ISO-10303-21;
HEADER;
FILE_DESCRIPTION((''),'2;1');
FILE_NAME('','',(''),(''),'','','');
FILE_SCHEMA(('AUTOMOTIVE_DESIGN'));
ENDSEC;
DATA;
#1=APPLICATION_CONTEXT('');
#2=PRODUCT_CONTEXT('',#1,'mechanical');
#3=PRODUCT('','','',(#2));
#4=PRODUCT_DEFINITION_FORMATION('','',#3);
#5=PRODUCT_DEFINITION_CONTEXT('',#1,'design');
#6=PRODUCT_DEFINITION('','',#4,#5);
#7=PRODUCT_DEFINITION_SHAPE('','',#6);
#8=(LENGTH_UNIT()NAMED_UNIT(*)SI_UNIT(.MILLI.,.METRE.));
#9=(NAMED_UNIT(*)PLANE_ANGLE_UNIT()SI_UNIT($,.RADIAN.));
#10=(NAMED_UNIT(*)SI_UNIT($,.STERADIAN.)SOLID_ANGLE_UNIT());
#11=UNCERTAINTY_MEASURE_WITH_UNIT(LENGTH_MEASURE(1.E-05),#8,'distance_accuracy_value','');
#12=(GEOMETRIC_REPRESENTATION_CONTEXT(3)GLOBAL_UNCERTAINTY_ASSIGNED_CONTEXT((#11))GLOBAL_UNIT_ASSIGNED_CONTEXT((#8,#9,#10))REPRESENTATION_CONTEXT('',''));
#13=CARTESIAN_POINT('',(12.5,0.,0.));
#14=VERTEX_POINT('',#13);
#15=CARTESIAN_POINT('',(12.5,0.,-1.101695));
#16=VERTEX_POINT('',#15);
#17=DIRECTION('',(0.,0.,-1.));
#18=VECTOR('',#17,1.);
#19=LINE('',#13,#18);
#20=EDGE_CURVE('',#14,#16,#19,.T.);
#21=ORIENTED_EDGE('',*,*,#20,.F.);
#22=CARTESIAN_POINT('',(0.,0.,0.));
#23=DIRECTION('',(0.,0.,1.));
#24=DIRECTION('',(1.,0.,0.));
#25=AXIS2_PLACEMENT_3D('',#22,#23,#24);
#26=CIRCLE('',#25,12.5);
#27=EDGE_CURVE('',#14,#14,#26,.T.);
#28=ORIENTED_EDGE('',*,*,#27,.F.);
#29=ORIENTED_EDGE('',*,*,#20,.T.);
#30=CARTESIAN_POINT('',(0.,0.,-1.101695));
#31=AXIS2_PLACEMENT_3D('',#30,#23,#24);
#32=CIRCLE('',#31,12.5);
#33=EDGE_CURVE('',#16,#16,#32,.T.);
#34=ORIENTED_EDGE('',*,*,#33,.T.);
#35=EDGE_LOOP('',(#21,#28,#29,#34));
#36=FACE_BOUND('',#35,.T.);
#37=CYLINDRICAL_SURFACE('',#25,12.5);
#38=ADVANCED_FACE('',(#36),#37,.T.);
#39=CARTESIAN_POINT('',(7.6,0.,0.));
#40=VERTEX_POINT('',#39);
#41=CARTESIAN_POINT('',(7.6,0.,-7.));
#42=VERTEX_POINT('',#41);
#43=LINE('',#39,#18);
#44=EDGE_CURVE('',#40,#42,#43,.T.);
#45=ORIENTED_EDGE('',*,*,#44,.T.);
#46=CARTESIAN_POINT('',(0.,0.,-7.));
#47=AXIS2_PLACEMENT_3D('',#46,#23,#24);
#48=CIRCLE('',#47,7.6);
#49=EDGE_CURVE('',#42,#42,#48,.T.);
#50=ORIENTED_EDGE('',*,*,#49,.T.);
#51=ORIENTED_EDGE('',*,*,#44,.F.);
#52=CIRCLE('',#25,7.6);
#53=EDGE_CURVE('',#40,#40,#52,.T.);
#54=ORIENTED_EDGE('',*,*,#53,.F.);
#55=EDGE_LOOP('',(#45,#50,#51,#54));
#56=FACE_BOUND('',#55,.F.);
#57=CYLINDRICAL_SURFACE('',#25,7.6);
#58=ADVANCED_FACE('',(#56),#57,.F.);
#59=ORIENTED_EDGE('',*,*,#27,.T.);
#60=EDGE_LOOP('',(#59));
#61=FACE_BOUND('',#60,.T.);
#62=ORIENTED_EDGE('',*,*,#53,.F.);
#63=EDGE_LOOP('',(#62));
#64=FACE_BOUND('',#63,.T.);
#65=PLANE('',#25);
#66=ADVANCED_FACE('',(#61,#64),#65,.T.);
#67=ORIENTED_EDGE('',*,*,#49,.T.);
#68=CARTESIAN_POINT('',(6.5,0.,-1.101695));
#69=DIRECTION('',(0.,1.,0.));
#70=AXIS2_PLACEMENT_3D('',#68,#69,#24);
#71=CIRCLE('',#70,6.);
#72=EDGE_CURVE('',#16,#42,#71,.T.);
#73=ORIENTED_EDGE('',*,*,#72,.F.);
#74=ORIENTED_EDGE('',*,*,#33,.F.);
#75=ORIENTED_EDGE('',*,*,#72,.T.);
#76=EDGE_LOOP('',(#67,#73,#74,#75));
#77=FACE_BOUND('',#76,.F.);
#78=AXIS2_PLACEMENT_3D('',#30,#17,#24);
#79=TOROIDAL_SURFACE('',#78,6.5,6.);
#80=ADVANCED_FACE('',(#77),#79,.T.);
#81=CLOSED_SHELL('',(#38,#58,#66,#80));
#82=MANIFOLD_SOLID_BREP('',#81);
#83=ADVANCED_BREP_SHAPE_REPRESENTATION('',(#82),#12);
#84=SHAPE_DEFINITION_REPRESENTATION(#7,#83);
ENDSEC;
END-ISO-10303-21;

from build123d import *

# Parameters (mm, degrees)
F0_R     = 12.5
F0_R_2   = 7.6
F1_DEPTH = 7


# Not quite as in the source:
# - a fillet or chamfer that OpenCascade refuses, or shapes differently, is made with other operations: its cross-section is extruded or revolved along the edge and cut away or added


with BuildPart() as f1:
    # F0 (on Top) → F1 (new body)
    with BuildSketch(Plane.XY):
        Circle(F0_R)
        Circle(F0_R_2, mode=Mode.SUBTRACT)
    extrude(amount=-F1_DEPTH)

    # F2: fillet of radius 6 on 1 edges, made by hand

    # F2_s1 → F2_t2 (revolve, cut)
    with BuildSketch(Plane.XZ):
        with BuildLine():
            ThreePointArc((12.5, -1.1016951588), (11.1151923037, -4.9357530613), (7.6, -7))
            Line((7.6, -7), (12.5, -7))
            Line((12.5, -7), (12.5, -1.1016951588))
        make_face()
    revolve(axis=Axis((0, 0, -7), (0, 0, 1)), mode=Mode.SUBTRACT)


solid = f1.part
